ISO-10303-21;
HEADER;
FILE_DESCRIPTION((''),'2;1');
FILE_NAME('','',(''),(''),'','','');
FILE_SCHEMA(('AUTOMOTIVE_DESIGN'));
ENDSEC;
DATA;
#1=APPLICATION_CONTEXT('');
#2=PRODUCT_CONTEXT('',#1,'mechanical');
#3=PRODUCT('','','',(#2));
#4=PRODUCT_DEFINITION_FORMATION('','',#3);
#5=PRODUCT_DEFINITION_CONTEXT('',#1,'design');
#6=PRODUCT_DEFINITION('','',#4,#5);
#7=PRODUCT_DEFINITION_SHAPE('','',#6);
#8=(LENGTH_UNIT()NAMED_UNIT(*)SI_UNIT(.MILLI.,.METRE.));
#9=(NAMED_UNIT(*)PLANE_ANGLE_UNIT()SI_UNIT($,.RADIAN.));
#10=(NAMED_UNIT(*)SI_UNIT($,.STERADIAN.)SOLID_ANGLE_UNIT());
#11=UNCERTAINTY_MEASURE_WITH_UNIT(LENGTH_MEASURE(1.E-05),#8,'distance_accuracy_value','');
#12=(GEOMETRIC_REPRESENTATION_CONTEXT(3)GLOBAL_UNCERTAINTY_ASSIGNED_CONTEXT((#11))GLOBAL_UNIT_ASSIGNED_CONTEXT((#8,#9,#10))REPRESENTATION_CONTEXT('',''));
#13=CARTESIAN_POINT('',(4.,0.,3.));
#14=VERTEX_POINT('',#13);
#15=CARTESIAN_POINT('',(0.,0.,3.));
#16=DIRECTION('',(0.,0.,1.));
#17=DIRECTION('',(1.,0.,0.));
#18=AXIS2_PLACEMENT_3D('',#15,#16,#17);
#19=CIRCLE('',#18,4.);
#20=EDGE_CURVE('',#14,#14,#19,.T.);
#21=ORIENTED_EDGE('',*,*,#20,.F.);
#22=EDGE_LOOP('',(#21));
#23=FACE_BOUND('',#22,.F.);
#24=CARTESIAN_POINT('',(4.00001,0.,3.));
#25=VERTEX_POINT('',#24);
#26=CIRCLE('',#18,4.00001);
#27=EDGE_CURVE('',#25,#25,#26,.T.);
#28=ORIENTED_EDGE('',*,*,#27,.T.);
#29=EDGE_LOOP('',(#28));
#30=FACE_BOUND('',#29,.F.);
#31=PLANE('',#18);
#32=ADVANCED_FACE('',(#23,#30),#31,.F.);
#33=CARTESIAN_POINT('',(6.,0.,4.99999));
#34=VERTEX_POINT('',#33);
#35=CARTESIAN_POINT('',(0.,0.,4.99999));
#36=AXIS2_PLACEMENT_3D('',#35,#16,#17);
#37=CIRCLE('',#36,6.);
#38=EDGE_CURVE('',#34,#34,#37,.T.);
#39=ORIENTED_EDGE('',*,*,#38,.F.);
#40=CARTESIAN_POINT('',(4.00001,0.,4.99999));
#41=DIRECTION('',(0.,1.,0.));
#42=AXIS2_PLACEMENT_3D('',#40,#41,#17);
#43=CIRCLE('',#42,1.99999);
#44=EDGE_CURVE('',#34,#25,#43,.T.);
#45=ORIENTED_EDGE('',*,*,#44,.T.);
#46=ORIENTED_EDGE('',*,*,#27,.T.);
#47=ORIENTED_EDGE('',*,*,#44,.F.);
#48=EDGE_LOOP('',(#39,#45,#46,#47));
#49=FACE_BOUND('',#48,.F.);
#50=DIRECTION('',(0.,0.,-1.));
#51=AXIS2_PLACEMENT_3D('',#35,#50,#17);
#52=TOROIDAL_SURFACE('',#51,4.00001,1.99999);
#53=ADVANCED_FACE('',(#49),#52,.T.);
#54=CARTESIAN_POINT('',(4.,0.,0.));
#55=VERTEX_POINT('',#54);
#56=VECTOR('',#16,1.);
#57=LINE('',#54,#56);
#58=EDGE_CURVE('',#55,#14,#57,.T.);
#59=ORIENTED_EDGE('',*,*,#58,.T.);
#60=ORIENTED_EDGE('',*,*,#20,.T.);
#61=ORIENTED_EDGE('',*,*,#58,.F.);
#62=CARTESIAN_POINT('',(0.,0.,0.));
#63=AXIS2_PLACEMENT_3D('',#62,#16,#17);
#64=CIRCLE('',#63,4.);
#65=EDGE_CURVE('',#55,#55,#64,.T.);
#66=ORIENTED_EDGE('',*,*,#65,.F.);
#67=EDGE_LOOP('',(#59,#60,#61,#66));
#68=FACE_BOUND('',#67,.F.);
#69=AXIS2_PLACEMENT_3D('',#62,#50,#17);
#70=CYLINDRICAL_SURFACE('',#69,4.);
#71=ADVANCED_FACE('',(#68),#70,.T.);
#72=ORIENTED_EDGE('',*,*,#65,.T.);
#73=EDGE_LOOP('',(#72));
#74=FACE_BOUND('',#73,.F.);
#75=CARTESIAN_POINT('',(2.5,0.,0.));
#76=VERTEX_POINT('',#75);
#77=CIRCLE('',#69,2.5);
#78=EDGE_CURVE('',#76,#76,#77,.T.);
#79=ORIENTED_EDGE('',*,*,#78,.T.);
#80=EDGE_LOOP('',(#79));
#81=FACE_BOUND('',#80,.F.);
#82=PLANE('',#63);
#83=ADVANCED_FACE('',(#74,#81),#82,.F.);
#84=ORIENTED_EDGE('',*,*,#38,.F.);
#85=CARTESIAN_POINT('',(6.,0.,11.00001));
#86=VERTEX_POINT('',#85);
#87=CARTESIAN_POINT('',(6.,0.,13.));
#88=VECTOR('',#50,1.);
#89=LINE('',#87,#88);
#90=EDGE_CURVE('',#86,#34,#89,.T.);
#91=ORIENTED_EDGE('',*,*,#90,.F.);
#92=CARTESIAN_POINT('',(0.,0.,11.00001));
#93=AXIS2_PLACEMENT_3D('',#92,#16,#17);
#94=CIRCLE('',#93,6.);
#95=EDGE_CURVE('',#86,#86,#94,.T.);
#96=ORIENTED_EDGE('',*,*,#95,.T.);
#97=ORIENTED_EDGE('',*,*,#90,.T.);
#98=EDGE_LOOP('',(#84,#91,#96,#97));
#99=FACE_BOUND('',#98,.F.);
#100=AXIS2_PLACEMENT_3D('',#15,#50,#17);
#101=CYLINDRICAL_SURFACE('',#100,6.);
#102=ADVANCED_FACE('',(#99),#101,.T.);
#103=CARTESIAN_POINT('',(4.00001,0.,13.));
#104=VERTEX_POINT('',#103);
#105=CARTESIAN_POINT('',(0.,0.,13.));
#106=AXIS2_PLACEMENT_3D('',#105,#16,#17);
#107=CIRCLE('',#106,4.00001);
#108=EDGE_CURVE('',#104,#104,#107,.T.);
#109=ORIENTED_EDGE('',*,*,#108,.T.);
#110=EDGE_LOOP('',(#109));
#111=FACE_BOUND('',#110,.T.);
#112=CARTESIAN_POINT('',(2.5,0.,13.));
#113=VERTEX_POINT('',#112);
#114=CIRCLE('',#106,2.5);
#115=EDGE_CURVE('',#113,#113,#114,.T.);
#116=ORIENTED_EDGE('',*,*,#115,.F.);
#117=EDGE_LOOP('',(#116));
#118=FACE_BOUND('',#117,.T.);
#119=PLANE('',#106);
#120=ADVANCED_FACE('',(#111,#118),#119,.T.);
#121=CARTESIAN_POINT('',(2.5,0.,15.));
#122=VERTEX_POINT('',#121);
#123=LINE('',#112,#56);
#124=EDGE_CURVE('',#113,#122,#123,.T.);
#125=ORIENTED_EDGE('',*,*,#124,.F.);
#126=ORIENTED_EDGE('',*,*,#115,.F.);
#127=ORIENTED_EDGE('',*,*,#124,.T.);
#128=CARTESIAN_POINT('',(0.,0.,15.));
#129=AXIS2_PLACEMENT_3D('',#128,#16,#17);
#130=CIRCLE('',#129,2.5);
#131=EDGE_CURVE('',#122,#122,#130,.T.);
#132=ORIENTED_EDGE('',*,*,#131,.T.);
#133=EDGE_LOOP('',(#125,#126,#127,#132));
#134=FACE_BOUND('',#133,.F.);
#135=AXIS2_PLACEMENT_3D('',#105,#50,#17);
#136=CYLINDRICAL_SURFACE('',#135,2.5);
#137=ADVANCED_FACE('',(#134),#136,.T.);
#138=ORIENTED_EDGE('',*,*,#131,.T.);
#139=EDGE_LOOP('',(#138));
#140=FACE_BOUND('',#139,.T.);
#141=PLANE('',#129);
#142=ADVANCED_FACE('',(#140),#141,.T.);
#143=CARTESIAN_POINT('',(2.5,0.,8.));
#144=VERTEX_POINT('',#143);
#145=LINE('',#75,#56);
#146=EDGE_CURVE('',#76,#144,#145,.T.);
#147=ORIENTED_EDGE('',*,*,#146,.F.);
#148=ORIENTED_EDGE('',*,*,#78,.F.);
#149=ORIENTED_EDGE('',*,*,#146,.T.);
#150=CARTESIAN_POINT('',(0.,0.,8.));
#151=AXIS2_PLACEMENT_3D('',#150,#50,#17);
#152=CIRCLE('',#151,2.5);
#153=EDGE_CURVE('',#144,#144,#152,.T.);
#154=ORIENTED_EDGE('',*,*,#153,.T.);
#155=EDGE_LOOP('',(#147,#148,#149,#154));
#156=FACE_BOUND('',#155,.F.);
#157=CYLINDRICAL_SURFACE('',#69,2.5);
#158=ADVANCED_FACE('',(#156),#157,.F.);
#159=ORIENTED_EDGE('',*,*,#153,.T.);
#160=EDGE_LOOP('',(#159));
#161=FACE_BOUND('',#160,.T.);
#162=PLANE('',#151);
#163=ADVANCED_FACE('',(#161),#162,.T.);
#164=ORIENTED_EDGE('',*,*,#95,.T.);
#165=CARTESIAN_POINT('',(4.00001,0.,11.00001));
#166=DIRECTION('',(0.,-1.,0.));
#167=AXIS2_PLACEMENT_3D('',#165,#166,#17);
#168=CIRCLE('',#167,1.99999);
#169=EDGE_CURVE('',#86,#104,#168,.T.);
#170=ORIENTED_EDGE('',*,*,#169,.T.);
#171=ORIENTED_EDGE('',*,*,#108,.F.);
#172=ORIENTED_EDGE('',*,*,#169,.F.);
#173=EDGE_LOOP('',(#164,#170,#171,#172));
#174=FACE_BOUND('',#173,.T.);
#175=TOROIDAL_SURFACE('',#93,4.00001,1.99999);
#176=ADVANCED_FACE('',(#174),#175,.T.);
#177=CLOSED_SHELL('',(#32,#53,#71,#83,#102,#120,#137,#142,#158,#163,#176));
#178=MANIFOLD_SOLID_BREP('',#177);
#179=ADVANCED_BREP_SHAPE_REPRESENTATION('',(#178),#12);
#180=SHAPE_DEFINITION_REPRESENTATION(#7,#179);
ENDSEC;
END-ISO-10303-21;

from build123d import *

# Parameters (mm, degrees)
F0_R     = 4
F1_DEPTH = 3
F2_R     = 6
F3_DEPTH = 10
F4_DEPTH = 8
F5_R     = 2.5
F6_DEPTH = 2
F7_R     = 1.99999
F8_R     = 2.5
F9_DEPTH = 8


# Not quite as in the source:
# - a fillet or chamfer is up to 0.001 mm smaller than in the source, because OpenCascade refuses the exact size


with BuildPart() as f1:
    # F0 (on Top) → F1 (new body)
    with BuildSketch(Plane.XY):
        Circle(F0_R)
    extrude(amount=F1_DEPTH)

    # F2 (on face) → F3 (join)
    with BuildSketch(Plane.XY.offset(3)):
        Circle(F2_R)
    extrude(amount=F3_DEPTH)

    # F2 (on face) → F4 (join)
    with BuildSketch(Plane.XY.offset(3)):
        Circle(F2_R)
    extrude(amount=F4_DEPTH)

    # F5 (on face) → F6 (join)
    with BuildSketch(Plane.XY.offset(13)):
        Circle(F5_R)
    extrude(amount=F6_DEPTH)

    # F7 (radius 2 in the source; OpenCascade refuses exactly that, so slightly less here)
    f7_edges = [f1.edges().sort_by_distance(p)[0] for p in [
        (-6, 0, 13),
        (-6, 0, 3),
    ]]
    fillet(f7_edges, radius=F7_R)

    # F8 (on face) → F9 (cut)
    with BuildSketch(Plane(origin=(0, 0, 0), x_dir=(1, 0, 0), z_dir=(0, 0, -1))):
        Circle(F8_R)
    extrude(amount=-F9_DEPTH, mode=Mode.SUBTRACT)


solid = f1.part
